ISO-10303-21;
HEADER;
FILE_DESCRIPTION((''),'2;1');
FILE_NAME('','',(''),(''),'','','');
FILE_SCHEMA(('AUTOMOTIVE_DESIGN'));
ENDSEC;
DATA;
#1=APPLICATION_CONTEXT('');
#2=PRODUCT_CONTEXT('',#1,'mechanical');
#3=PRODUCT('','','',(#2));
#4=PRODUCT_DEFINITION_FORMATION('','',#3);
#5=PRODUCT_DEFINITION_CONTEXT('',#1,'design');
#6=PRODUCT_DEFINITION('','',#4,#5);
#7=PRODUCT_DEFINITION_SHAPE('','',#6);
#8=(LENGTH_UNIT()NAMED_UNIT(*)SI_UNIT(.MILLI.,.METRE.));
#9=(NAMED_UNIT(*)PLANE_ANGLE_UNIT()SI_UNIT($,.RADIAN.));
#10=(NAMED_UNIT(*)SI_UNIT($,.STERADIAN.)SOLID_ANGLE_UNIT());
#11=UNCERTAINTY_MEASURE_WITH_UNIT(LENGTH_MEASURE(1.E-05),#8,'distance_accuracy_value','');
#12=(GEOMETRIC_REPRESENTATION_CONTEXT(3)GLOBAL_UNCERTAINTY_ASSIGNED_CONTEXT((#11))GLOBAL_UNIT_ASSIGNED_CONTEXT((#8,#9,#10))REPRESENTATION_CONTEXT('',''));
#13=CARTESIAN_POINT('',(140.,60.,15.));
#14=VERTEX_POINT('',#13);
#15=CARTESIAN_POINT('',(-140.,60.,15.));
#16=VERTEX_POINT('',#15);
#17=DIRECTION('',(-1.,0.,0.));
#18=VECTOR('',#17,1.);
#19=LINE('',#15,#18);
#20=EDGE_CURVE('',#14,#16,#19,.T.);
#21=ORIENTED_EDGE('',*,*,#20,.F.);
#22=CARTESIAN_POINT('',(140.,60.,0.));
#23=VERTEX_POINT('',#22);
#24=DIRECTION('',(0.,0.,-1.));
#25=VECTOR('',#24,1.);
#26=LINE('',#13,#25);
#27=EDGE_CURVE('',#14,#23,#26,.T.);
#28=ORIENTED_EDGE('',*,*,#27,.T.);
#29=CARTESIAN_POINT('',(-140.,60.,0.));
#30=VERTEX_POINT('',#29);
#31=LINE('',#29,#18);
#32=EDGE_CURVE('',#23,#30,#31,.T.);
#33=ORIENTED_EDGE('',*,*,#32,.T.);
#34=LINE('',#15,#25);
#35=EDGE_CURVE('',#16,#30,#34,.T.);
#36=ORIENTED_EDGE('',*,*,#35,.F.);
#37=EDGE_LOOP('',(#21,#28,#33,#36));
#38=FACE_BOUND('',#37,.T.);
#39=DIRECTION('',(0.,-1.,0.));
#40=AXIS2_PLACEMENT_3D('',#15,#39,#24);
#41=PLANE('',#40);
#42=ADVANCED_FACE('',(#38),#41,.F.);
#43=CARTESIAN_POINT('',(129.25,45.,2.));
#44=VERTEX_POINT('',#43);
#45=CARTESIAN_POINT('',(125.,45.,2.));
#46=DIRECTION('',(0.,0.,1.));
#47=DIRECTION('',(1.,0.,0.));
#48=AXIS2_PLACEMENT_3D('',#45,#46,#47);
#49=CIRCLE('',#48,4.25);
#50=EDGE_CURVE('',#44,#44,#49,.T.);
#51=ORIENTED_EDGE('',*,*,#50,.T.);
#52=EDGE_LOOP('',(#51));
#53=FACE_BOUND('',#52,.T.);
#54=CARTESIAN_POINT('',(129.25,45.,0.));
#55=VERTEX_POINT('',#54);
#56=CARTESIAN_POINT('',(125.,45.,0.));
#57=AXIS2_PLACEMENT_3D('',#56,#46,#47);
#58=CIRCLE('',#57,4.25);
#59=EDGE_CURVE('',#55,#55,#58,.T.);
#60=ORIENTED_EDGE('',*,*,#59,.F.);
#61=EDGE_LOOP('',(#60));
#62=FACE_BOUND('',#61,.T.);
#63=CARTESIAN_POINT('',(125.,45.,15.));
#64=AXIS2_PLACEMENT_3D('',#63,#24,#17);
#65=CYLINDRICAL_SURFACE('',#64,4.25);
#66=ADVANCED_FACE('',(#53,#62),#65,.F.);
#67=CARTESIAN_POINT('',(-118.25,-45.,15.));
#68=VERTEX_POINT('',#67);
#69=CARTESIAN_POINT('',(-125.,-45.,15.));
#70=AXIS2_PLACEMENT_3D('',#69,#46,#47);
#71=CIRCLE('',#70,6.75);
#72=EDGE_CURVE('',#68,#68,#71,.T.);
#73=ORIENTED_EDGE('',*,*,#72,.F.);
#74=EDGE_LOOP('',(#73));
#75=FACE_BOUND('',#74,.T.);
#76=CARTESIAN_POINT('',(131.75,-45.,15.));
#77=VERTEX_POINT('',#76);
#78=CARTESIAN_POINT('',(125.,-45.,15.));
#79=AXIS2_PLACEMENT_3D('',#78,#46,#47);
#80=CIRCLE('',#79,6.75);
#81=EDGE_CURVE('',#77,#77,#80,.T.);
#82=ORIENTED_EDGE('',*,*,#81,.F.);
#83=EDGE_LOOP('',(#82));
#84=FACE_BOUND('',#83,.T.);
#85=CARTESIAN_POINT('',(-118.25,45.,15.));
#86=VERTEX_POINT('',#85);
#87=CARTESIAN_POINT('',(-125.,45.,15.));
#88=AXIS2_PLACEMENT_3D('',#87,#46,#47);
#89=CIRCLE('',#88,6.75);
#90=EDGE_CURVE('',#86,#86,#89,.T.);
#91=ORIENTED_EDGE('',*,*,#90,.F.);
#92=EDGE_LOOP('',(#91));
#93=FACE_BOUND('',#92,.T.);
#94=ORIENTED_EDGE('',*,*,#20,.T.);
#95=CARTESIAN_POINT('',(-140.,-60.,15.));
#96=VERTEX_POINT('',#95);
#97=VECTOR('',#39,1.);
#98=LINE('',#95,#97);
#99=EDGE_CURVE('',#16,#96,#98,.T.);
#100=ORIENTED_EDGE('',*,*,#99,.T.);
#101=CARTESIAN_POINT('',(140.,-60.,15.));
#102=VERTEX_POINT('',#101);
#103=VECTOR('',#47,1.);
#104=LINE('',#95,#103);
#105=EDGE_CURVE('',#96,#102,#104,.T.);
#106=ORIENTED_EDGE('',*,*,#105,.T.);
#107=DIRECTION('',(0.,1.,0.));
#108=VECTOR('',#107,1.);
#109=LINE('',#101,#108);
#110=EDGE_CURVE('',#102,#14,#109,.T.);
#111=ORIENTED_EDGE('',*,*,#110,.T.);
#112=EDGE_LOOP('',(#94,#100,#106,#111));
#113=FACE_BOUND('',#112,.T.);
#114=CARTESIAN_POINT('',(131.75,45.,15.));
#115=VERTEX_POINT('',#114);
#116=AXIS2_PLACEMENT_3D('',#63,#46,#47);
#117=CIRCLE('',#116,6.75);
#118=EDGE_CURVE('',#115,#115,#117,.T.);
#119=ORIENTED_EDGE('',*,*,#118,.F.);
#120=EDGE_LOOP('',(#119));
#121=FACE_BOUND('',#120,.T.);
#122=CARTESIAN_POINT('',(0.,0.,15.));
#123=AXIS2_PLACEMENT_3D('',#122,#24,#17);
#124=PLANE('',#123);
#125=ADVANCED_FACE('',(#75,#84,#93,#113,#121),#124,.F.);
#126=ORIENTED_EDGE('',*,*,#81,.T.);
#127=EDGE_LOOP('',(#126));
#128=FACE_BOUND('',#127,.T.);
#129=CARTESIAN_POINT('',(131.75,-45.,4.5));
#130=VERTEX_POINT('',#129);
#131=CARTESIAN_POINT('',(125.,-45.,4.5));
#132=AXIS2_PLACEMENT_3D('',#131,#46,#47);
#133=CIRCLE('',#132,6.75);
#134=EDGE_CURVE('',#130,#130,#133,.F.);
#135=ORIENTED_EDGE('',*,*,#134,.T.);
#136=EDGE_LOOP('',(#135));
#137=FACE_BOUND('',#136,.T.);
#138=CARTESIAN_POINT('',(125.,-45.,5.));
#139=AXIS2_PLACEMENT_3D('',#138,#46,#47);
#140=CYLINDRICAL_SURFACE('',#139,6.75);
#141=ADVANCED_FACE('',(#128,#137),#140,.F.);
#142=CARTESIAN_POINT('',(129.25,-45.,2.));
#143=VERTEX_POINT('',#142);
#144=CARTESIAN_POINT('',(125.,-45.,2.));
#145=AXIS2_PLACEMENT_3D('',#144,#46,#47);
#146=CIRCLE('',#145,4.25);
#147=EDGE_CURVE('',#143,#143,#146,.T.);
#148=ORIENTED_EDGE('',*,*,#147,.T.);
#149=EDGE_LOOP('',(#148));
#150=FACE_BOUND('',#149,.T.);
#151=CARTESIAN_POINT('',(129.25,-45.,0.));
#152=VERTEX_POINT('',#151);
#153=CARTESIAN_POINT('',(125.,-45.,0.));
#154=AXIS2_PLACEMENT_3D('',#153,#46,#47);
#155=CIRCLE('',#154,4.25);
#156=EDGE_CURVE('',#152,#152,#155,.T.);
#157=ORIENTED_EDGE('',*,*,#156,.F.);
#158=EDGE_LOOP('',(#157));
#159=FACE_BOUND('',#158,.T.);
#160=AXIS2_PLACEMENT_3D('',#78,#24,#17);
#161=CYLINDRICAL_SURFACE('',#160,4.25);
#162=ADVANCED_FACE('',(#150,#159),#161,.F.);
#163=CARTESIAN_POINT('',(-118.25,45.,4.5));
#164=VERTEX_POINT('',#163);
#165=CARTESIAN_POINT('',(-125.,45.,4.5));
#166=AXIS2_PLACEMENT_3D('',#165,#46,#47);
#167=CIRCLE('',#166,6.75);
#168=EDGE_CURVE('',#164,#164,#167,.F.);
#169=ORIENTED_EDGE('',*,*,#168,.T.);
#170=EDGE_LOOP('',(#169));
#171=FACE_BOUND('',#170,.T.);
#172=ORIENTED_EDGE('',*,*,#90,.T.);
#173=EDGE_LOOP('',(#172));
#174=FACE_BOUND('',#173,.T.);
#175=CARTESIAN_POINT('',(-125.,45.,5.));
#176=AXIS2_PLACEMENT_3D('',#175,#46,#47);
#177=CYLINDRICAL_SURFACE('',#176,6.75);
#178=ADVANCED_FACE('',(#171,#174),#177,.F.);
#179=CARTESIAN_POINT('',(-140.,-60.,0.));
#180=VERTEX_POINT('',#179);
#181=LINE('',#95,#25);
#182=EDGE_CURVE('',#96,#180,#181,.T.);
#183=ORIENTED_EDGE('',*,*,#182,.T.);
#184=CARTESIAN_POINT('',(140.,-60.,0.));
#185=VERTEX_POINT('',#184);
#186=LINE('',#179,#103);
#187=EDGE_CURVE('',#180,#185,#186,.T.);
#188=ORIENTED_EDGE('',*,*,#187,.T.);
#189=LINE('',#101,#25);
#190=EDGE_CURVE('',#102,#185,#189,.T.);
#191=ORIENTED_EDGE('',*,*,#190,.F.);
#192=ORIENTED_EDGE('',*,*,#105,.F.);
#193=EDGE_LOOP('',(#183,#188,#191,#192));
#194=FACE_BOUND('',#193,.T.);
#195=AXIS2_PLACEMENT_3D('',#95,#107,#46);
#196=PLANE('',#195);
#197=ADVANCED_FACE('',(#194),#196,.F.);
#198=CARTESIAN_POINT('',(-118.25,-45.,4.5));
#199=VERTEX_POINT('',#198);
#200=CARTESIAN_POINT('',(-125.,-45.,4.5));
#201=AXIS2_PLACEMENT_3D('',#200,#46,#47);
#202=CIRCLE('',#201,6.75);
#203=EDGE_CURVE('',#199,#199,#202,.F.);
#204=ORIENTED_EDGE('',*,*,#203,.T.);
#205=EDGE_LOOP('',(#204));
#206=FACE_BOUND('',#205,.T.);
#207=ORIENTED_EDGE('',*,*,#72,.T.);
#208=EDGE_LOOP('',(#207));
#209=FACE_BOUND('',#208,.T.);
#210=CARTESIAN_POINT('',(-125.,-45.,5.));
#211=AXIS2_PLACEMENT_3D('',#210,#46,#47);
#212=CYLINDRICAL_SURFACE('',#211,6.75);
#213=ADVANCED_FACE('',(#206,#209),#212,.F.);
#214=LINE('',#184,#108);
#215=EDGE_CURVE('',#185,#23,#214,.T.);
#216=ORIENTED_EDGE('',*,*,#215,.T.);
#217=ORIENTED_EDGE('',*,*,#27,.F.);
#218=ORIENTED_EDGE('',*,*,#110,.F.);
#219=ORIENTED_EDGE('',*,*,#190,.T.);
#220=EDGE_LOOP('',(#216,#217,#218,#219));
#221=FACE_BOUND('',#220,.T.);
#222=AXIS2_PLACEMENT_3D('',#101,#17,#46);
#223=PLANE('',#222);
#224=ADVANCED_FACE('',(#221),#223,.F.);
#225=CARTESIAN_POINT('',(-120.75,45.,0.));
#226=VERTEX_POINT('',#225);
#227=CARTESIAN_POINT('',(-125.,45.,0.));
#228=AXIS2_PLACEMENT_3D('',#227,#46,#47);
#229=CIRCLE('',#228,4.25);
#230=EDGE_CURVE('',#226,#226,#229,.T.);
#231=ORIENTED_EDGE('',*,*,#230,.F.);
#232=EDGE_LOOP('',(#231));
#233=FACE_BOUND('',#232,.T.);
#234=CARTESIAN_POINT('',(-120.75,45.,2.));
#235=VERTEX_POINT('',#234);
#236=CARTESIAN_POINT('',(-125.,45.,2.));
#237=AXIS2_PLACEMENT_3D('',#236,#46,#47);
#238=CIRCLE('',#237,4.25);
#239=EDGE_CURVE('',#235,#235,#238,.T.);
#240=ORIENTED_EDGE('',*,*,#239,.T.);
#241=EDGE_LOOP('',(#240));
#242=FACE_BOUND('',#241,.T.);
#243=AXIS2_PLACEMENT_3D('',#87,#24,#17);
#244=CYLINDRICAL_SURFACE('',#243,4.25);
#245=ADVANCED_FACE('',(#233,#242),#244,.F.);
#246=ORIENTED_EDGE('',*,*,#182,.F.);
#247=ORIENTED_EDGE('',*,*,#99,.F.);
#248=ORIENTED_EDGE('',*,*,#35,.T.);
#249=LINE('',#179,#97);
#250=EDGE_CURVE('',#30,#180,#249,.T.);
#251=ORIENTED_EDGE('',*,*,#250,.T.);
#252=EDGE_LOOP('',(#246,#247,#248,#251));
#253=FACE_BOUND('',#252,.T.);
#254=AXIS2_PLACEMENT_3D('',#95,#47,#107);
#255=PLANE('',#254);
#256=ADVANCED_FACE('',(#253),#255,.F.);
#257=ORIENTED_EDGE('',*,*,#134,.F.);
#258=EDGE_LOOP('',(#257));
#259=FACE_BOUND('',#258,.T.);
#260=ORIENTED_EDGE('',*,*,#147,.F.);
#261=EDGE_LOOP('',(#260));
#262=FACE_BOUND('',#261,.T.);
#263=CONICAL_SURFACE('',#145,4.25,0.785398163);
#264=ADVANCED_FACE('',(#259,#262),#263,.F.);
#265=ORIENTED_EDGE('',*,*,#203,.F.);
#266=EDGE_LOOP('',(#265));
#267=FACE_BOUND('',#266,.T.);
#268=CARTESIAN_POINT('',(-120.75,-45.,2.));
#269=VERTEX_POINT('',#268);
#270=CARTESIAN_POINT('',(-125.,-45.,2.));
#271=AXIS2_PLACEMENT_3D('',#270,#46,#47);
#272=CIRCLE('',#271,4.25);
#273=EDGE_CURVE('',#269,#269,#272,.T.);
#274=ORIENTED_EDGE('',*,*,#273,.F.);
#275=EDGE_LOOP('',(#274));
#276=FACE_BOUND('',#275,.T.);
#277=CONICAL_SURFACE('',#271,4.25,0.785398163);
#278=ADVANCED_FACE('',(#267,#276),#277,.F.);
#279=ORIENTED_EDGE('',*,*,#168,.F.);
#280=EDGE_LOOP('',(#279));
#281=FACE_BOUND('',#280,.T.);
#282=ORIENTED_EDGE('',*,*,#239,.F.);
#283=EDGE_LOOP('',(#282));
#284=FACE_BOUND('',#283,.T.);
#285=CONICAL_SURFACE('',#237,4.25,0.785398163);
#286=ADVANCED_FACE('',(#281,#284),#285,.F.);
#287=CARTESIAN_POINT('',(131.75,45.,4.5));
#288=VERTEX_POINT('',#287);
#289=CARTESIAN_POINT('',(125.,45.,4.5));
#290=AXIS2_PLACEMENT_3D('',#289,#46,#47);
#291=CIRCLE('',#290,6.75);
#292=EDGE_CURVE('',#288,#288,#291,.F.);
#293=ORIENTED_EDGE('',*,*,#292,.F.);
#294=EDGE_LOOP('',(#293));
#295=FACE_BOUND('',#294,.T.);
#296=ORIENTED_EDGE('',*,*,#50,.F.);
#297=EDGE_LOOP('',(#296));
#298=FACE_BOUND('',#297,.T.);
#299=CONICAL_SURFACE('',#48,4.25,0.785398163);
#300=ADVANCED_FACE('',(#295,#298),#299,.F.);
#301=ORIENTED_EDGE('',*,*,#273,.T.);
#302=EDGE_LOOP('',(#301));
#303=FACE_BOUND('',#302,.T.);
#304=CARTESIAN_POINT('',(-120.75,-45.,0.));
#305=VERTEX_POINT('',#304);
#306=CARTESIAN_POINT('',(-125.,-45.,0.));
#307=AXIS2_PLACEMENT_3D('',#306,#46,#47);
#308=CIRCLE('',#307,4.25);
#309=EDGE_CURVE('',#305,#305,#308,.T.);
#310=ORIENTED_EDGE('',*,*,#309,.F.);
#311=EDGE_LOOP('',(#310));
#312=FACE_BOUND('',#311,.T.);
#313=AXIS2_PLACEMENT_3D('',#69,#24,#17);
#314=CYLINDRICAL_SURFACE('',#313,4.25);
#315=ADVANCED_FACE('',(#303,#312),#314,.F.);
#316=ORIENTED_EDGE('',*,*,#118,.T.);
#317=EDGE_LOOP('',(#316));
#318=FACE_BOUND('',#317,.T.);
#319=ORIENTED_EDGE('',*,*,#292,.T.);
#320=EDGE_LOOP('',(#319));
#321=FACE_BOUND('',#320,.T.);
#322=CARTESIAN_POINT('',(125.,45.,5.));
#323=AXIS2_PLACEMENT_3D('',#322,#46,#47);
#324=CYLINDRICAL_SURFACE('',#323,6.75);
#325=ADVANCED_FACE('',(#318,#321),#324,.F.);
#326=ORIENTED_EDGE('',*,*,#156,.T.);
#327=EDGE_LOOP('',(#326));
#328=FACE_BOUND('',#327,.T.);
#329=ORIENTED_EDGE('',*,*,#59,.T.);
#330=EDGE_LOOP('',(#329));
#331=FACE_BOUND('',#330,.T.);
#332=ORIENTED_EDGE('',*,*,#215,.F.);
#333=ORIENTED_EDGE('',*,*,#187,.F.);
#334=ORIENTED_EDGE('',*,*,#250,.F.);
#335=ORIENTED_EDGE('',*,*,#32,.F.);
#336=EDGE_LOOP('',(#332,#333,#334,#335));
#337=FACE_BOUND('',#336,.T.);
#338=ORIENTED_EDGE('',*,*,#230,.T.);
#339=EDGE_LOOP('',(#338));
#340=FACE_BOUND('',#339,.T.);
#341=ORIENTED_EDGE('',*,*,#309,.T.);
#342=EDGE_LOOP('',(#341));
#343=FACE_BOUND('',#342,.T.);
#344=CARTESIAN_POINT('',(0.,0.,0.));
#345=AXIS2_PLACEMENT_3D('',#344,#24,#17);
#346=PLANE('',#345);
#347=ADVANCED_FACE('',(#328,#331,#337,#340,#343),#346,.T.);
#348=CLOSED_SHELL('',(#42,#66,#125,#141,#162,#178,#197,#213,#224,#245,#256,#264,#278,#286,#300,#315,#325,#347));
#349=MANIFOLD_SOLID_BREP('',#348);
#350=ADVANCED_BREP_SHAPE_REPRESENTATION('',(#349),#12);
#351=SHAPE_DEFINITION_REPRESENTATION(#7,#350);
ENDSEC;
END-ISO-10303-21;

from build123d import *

# Parameters (mm, degrees)
SKETCH1_W           = 280
SKETCH1_H           = 120
SKETCH1_R           = 4.25
BOSS_EXTRUDE1_DEPTH = 15
SKETCH2_R           = 6.75
CUT_EXTRUDE1_DEPTH  = 10
CHAMFER2_SIZE       = 3
CHAMFER3_SIZE       = 3


with BuildPart() as part:
    # Sketch1 → Boss-Extrude1 (new body)
    with BuildSketch(Plane.XY):
        Rectangle(SKETCH1_W, SKETCH1_H)
        with Locations((-125, 45)):
            Circle(SKETCH1_R, mode=Mode.SUBTRACT)
        with Locations((125, 45)):
            Circle(SKETCH1_R, mode=Mode.SUBTRACT)
        with Locations((125, -45)):
            Circle(SKETCH1_R, mode=Mode.SUBTRACT)
        with Locations((-125, -45)):
            Circle(SKETCH1_R, mode=Mode.SUBTRACT)
    extrude(amount=BOSS_EXTRUDE1_DEPTH)

    # Sketch2 → Cut-Extrude1 (cut)
    with BuildSketch(Plane.XY.offset(15)):
        with Locations((-125, 45)):
            Circle(SKETCH2_R)
        with Locations((125, 45)):
            Circle(SKETCH2_R)
        with Locations((125, -45)):
            Circle(SKETCH2_R)
        with Locations((-125, -45)):
            Circle(SKETCH2_R)
    extrude(amount=-CUT_EXTRUDE1_DEPTH, mode=Mode.SUBTRACT)

    # Chamfer2
    # the kernel refuses this chamfer: 3 mm, written as the material it takes off along each edge
    with BuildSketch(Plane(origin=(-125, 45, 5), x_dir=(1, 0, 0), z_dir=(0, 1, 0))) as chamfer2_piece_1_section:
        Polygon((4.25, CHAMFER2_SIZE), (4.25 + CHAMFER2_SIZE, 0), (4.25, 0), align=None)
    chamfer2_piece_1 = revolve(axis=Axis((-125, 45, 5), (0, 0, -1)), mode=Mode.PRIVATE)
    chamfer2_piece_1 = chamfer2_piece_1 & Plane(origin=(-125, 45, 3.245521929), x_dir=(1, 0, 0), z_dir=(0, 0, 1)) * Cylinder(6.75, 29, mode=Mode.PRIVATE)
    add(chamfer2_piece_1, mode=Mode.SUBTRACT)

    # Chamfer3
    # the kernel refuses this chamfer: 3 mm, written as the material it takes off along each edge
    with BuildSketch(Plane(origin=(125, 45, 5), x_dir=(1, 0, 0), z_dir=(0, 1, 0))) as chamfer3_piece_1_section:
        Polygon((4.25 + CHAMFER3_SIZE, 0), (4.25, CHAMFER3_SIZE), (4.25, 0), align=None)
    chamfer3_piece_1 = revolve(axis=Axis((125, 45, 5), (0, 0, -1)), mode=Mode.PRIVATE)
    chamfer3_piece_1 = chamfer3_piece_1 & Plane(origin=(125, 45, 3.245521929), x_dir=(1, 0, 0), z_dir=(0, 0, 1)) * Cylinder(6.75, 29, mode=Mode.PRIVATE)
    add(chamfer3_piece_1, mode=Mode.SUBTRACT)
    with BuildSketch(Plane(origin=(125, -45, 5), x_dir=(1, 0, 0), z_dir=(0, 1, 0))) as chamfer3_piece_2_section:
        Polygon((4.25 + CHAMFER3_SIZE, 0), (4.25, CHAMFER3_SIZE), (4.25, 0), align=None)
    chamfer3_piece_2 = revolve(axis=Axis((125, -45, 5), (0, 0, -1)), mode=Mode.PRIVATE)
    chamfer3_piece_2 = chamfer3_piece_2 & Plane(origin=(125, -45, 3.245521929), x_dir=(1, 0, 0), z_dir=(0, 0, 1)) * Cylinder(6.75, 29, mode=Mode.PRIVATE)
    add(chamfer3_piece_2, mode=Mode.SUBTRACT)
    with BuildSketch(Plane(origin=(-125, -45, 5), x_dir=(1, 0, 0), z_dir=(0, 1, 0))) as chamfer3_piece_3_section:
        Polygon((4.25 + CHAMFER3_SIZE, 0), (4.25, CHAMFER3_SIZE), (4.25, 0), align=None)
    chamfer3_piece_3 = revolve(axis=Axis((-125, -45, 5), (0, 0, -1)), mode=Mode.PRIVATE)
    chamfer3_piece_3 = chamfer3_piece_3 & Plane(origin=(-125, -45, 3.245521929), x_dir=(1, 0, 0), z_dir=(0, 0, 1)) * Cylinder(6.75, 29, mode=Mode.PRIVATE)
    add(chamfer3_piece_3, mode=Mode.SUBTRACT)


solid = part.part
